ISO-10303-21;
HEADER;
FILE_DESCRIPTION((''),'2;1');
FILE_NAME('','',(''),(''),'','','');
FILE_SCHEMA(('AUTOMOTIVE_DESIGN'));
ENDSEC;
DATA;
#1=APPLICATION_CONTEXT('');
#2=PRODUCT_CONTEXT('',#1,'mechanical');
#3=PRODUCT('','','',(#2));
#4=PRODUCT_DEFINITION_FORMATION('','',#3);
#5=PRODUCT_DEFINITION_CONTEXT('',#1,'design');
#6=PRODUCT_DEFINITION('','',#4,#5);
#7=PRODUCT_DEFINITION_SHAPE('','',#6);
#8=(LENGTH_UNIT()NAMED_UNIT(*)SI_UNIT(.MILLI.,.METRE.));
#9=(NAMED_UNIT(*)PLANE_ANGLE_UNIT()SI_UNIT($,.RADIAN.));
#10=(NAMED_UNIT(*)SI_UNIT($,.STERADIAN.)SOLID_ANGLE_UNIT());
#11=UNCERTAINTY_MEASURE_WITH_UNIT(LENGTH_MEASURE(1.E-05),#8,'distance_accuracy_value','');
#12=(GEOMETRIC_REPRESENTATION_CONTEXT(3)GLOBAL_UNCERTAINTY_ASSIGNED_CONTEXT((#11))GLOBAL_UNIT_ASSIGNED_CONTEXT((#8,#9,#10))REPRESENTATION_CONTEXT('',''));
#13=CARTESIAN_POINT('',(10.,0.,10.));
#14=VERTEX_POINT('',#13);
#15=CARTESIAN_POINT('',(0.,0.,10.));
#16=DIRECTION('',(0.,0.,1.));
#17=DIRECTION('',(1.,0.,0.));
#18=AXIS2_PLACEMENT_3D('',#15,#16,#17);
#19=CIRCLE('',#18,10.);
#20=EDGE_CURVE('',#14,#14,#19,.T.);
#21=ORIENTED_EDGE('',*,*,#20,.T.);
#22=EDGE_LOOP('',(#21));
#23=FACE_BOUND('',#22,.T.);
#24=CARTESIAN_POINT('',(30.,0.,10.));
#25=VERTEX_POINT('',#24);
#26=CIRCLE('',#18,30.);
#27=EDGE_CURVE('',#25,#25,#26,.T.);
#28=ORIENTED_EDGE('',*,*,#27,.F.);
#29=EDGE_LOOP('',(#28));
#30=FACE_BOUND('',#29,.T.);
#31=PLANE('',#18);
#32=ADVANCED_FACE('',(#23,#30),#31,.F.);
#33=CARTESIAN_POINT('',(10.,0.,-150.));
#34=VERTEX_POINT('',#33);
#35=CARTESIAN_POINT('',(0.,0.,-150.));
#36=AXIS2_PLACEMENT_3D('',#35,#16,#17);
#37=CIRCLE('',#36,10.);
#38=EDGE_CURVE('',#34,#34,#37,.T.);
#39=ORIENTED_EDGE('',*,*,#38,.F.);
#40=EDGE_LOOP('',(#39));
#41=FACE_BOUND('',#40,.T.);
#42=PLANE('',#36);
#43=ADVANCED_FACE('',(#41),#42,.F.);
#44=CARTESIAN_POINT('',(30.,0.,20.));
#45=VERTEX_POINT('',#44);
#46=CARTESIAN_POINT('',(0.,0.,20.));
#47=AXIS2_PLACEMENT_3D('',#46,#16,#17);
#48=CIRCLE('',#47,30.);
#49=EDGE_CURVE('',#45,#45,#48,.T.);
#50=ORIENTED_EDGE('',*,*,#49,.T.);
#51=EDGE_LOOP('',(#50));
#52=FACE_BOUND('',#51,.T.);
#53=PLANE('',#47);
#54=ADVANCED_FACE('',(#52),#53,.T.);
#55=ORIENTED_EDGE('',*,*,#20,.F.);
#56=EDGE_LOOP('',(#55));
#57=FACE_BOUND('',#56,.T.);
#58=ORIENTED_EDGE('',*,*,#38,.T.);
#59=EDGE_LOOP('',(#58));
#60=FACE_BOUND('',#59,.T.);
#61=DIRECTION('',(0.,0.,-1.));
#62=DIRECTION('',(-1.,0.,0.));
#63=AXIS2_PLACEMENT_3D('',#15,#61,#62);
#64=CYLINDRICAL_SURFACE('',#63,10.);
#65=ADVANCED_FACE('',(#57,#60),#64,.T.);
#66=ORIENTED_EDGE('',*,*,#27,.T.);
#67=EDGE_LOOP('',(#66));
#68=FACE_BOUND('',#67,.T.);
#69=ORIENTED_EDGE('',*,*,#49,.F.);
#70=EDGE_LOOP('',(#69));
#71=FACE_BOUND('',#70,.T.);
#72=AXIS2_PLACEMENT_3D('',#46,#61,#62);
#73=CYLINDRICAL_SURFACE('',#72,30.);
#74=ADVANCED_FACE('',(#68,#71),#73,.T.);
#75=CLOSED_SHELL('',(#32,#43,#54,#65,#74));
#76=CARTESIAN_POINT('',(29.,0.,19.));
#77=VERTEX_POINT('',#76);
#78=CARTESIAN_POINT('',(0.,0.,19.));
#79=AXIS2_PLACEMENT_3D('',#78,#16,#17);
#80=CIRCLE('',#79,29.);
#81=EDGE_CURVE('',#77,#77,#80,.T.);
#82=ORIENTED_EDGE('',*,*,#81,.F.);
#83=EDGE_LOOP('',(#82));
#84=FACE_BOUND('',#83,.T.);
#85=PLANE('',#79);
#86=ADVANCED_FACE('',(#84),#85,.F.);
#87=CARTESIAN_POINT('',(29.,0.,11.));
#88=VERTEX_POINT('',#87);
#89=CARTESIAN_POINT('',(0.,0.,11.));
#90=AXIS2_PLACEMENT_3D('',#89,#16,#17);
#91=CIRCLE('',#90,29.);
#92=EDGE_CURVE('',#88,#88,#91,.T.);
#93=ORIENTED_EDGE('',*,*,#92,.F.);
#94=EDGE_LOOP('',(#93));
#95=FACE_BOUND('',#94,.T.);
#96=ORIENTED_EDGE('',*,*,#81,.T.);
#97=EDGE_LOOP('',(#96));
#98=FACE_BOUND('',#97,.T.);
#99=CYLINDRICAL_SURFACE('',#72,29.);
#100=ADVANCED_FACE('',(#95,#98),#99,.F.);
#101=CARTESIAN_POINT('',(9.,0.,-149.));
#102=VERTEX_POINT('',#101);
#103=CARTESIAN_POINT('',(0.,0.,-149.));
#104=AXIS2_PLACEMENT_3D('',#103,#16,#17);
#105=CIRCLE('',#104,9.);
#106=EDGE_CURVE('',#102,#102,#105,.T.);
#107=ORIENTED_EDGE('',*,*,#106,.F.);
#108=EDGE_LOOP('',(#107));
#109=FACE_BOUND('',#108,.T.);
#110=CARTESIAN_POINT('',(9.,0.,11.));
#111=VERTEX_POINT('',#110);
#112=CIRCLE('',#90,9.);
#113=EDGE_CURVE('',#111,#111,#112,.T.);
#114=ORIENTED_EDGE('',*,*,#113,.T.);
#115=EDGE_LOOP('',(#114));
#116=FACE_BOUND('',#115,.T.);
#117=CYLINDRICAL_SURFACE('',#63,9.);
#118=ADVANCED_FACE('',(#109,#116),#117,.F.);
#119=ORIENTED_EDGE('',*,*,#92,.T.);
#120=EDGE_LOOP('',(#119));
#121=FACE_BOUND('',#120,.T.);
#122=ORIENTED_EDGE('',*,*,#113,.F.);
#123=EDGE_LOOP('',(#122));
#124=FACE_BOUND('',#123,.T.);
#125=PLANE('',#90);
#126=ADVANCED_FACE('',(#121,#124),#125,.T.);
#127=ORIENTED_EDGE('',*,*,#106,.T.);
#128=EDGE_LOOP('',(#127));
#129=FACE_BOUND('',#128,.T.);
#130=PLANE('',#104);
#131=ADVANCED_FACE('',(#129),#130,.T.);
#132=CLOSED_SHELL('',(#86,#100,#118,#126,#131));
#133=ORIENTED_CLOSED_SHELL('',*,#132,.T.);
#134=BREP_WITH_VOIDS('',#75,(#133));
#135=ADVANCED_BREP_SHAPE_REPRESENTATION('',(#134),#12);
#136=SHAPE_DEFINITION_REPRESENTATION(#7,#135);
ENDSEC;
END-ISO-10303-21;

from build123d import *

# Parameters (mm, degrees)
BOSS_EXTRUDE1_DEPTH      = 10
BOSS_EXTRUDE1_DEPTH_BACK = 150
SKETCH1_R                = 10
SKETCH2_R                = 30
BOSS_EXTRUDE2_DEPTH      = 10
SHELL1_START             = -149
SHELL1_OUTLINE_R         = 9
SHELL1_DEPTH             = 168
SHELL1_START_2           = 11
SHELL1_2_OUTLINE_R       = 29
SHELL1_2_OUTLINE_R_2     = 9
SHELL1_2_DEPTH           = 8


# Read off the part's stored shape, not the designer's step: Shell1
with BuildPart() as part:
    # Sketch1 → Boss-Extrude1 (new, two sides: drawn at the far end of the back side and taken through both)
    with BuildSketch(Plane.XY.offset(-BOSS_EXTRUDE1_DEPTH_BACK)):
        Circle(SKETCH1_R)
    extrude(amount=BOSS_EXTRUDE1_DEPTH + BOSS_EXTRUDE1_DEPTH_BACK)

    # Sketch2 → Boss-Extrude2 (add)
    with BuildSketch(Plane.XY.offset(10)):
        Circle(SKETCH2_R)
    extrude(amount=BOSS_EXTRUDE2_DEPTH)

    # Shell1 outline → Shell1 (cut)
    with BuildSketch(Plane.XY.offset(SHELL1_START)):
        Circle(SHELL1_OUTLINE_R)
    extrude(amount=SHELL1_DEPTH, mode=Mode.SUBTRACT)

    # Shell1 2 outline → Shell1 2 (cut)
    with BuildSketch(Plane.XY.offset(SHELL1_START_2)):
        Circle(SHELL1_2_OUTLINE_R)
        Circle(SHELL1_2_OUTLINE_R_2, mode=Mode.SUBTRACT)
    extrude(amount=SHELL1_2_DEPTH, mode=Mode.SUBTRACT)


solid = part.part
